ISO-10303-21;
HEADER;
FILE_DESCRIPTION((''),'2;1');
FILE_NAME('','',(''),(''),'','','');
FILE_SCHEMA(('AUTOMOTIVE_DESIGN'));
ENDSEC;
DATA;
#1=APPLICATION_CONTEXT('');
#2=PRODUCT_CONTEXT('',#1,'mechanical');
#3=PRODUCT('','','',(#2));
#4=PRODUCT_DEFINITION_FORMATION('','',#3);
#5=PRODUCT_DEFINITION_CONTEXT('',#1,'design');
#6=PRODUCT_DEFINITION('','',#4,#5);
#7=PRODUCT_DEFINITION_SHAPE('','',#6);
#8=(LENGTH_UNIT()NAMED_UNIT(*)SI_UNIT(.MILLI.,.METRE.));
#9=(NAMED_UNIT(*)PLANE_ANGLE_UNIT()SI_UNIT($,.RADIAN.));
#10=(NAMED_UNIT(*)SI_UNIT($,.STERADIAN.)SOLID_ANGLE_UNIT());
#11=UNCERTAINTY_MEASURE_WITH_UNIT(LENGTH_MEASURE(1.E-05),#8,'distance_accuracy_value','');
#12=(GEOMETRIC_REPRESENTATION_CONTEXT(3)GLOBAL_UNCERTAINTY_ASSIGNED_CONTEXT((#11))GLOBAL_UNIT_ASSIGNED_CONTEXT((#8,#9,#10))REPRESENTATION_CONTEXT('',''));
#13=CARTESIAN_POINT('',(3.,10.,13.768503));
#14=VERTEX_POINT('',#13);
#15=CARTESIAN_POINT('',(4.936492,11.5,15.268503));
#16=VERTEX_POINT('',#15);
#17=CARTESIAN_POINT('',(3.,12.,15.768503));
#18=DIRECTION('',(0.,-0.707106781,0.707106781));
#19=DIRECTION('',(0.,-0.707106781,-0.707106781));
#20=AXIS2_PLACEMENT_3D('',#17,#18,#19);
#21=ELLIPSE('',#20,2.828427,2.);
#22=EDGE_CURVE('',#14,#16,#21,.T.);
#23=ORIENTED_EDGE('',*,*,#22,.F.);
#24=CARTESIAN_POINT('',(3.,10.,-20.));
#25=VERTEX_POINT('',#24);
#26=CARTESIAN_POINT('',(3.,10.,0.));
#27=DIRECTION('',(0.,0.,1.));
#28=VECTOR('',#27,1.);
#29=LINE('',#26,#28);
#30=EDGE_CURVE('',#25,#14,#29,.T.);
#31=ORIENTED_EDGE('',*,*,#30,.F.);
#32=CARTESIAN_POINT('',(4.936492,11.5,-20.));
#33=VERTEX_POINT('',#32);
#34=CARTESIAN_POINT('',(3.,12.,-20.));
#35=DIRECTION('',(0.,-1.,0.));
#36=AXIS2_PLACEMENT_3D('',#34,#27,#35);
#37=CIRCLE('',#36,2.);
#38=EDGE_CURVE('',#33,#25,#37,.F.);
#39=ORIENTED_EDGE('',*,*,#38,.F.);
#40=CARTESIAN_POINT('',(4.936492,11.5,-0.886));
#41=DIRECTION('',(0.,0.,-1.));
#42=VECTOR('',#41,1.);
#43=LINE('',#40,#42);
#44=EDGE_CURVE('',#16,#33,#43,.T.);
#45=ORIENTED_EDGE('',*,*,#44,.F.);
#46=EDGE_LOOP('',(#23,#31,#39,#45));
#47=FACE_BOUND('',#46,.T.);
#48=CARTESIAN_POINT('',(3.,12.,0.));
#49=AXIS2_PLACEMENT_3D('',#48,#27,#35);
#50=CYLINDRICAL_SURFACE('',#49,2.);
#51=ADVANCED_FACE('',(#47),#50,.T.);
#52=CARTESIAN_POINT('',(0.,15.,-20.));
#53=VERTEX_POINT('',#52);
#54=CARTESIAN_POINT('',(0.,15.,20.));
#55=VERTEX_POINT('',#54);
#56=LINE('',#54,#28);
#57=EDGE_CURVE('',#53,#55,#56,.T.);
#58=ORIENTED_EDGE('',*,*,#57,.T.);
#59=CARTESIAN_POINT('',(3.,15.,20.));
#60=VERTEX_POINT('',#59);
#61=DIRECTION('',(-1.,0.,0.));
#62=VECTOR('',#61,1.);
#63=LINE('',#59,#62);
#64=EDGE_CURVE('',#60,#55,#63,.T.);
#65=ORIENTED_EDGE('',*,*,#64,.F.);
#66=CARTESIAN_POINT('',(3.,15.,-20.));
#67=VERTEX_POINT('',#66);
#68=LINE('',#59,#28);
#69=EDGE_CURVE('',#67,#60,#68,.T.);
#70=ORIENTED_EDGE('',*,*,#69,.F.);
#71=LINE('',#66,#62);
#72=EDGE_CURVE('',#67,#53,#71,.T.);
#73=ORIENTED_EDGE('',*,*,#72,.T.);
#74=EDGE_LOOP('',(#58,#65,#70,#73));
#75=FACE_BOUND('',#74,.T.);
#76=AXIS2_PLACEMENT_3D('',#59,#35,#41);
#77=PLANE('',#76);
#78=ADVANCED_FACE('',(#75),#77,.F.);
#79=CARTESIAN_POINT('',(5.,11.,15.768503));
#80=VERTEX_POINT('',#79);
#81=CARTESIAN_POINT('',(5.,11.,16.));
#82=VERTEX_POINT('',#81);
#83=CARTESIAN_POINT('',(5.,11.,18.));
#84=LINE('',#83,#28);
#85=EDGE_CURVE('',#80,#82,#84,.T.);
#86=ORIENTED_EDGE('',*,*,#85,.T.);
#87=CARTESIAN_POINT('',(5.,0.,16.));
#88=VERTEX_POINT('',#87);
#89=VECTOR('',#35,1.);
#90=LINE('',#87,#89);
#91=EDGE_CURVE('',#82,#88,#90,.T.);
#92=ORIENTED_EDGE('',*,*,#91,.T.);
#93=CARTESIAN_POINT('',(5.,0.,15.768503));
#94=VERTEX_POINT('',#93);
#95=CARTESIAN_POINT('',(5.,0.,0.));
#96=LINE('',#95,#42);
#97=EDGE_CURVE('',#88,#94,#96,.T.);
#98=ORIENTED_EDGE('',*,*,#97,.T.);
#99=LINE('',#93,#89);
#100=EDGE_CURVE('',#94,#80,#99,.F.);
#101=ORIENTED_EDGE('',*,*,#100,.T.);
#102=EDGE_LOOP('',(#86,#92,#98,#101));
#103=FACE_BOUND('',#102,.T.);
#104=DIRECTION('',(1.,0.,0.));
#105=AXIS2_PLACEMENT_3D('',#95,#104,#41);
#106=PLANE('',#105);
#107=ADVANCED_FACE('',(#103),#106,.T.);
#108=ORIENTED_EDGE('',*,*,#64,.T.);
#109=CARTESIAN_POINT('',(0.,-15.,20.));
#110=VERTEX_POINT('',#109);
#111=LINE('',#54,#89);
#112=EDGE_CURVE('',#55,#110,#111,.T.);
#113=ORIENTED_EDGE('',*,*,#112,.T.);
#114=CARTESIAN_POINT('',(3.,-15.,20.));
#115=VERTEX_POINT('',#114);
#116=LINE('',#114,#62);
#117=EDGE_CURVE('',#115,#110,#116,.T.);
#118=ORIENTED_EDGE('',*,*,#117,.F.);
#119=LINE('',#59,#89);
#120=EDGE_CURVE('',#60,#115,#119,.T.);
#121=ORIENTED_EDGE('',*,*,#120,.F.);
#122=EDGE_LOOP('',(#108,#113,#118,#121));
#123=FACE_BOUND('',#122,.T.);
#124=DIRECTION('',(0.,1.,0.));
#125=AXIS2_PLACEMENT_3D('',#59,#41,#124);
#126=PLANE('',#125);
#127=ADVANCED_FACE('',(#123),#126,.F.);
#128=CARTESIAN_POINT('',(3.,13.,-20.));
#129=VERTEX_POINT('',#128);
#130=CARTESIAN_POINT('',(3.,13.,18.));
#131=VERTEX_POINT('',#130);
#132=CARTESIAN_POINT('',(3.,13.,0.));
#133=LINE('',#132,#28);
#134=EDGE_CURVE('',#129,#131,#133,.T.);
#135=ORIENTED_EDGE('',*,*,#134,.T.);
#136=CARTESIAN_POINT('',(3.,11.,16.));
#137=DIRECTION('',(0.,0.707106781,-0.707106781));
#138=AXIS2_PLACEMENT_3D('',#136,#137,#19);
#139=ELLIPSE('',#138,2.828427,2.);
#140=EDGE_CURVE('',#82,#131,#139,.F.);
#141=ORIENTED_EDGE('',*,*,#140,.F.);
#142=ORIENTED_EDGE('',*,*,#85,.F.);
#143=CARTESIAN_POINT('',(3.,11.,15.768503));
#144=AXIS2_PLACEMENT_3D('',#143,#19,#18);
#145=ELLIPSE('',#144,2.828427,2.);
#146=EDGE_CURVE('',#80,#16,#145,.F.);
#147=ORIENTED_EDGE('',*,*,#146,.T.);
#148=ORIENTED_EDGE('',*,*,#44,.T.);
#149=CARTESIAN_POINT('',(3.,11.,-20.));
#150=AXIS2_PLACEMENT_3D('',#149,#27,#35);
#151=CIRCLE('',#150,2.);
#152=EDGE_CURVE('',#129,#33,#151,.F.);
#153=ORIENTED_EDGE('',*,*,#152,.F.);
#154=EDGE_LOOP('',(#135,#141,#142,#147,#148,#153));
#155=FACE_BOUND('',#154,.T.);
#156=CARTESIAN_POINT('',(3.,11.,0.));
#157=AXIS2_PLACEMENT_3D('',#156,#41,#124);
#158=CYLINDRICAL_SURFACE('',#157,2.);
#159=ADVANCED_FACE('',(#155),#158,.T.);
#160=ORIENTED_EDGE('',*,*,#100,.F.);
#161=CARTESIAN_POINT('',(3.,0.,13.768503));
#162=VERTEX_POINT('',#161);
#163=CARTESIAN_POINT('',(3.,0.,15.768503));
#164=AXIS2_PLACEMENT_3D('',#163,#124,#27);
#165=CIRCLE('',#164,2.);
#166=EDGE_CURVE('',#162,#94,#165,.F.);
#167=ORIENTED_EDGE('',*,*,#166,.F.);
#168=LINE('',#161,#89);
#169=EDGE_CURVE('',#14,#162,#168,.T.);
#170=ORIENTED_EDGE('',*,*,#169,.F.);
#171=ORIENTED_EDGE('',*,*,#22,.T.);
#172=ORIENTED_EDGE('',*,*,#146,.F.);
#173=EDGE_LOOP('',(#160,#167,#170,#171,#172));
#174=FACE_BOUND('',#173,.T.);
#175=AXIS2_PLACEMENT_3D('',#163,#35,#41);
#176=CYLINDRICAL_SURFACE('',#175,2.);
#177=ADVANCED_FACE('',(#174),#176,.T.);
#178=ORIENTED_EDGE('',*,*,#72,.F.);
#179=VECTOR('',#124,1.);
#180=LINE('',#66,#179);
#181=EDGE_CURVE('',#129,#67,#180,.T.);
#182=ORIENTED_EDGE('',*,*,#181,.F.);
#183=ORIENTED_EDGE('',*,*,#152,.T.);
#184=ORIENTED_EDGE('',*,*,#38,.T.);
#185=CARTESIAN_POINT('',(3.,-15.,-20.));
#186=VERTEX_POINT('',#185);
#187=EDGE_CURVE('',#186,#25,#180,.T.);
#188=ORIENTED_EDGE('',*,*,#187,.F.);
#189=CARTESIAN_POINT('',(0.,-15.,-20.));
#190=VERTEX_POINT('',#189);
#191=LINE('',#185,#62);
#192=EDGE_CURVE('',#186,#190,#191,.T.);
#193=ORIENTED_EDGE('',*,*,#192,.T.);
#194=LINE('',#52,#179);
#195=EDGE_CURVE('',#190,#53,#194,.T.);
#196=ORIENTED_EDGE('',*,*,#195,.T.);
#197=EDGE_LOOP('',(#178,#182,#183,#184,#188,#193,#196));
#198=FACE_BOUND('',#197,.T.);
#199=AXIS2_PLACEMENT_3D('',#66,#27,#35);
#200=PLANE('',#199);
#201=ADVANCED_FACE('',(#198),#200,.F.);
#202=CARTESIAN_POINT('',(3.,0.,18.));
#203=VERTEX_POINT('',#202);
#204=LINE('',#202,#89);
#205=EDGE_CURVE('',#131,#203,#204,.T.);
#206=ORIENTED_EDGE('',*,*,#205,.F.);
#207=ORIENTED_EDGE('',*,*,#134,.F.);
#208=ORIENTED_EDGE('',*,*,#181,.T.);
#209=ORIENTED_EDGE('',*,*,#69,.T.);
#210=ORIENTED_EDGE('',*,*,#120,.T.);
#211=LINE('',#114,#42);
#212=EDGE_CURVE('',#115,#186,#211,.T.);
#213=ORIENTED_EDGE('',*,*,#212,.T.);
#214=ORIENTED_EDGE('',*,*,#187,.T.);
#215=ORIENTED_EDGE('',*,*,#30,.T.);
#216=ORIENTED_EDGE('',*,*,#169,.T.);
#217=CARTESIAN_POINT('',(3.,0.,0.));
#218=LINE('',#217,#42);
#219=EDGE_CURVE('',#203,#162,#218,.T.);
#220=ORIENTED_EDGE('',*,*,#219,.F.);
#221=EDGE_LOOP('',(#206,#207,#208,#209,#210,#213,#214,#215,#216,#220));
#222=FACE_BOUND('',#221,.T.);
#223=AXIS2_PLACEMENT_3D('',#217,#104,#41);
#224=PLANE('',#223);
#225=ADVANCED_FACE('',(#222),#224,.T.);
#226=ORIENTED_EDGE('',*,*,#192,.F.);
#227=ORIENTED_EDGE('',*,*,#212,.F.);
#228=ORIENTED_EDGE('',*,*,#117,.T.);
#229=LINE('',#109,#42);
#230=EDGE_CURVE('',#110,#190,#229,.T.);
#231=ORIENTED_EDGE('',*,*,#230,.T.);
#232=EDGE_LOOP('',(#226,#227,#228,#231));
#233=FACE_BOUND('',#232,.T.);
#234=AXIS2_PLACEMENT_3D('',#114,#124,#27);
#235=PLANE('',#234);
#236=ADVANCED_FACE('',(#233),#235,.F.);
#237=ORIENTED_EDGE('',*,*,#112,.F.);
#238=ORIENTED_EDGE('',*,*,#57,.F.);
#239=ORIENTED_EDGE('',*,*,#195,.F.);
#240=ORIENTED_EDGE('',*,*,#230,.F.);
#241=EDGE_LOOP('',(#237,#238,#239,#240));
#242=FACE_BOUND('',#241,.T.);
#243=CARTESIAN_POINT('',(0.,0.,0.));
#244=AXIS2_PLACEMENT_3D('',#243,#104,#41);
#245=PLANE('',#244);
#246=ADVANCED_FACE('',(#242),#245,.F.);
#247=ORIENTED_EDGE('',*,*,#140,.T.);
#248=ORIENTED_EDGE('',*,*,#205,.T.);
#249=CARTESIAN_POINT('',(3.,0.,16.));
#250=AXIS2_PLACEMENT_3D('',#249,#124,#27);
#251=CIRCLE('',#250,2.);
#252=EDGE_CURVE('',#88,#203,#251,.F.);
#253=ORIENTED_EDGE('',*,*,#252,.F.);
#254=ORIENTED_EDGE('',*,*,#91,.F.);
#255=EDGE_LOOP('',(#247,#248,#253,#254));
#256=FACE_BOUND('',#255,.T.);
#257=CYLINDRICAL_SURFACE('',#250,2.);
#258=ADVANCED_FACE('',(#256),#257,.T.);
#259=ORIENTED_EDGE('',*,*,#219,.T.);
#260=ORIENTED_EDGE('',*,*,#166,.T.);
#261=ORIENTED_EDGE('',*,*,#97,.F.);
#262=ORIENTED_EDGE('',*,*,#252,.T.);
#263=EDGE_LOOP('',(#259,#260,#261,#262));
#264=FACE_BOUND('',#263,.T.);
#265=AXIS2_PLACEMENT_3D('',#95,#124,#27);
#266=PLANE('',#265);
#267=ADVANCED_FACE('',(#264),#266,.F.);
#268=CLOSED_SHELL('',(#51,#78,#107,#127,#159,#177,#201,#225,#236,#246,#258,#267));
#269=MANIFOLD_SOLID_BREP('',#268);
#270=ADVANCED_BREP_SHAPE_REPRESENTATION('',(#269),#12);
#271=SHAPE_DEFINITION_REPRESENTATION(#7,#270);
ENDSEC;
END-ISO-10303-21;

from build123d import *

# Parameters (mm, degrees)
SKETCH1_W           = 40
SKETCH1_H           = 30
BOSS_EXTRUDE1_DEPTH = 3
BOSS_EXTRUDE2_DEPTH = 2
FILLET1_R           = 2


with BuildPart() as part:
    # Sketch1 → Boss-Extrude1 (new body)
    with BuildSketch(Plane(origin=(0, 0, 0), x_dir=(0, 0, -1), z_dir=(1, 0, 0))):
        Rectangle(SKETCH1_W, SKETCH1_H)
    extrude(amount=BOSS_EXTRUDE1_DEPTH)

    # Sketch2 → Boss-Extrude2 (add)
    with BuildSketch(Plane(origin=(3, 0, 0), x_dir=(0, 0, -1), z_dir=(1, 0, 0))):
        Polygon((20, 10), (20, 13), (-13.768503326, 13), (-18, 13), (-18, 10), (-18, 0), (-13.768503326, 0), (-13.768503326, 10), align=None)
    extrude(amount=BOSS_EXTRUDE2_DEPTH)

    # Fillet1
    # the kernel refuses this fillet: 2 mm, written as the material it takes off along each edge
    with BuildSketch(Plane(origin=(5, -5, 18), x_dir=(-1, 0, 0), z_dir=(0, 1, 0))) as fillet1_piece_1:
        with BuildLine():
            CenterArc((FILLET1_R, -FILLET1_R), FILLET1_R, 90, 90)
            Line((0, -FILLET1_R), (0, 0))
            Line((0, 0), (FILLET1_R, 0))
        make_face()
    extrude(amount=23, mode=Mode.SUBTRACT)
    with BuildSketch(Plane(origin=(5, -5, 13.768503326), x_dir=(-1, 0, 0), z_dir=(0, 1, 0))) as fillet1_piece_2:
        with BuildLine():
            CenterArc((FILLET1_R, FILLET1_R), FILLET1_R, 180, 90)
            Line((0, FILLET1_R), (0, 0))
            Line((0, 0), (FILLET1_R, 0))
        make_face()
    extrude(amount=15, mode=Mode.SUBTRACT)
    with BuildSketch(Plane(origin=(5, 10, 13.768503326), x_dir=(-1, 0, 0), z_dir=(0, 0, -1))) as fillet1_piece_3:
        with BuildLine():
            CenterArc((FILLET1_R, FILLET1_R), FILLET1_R, 180, 90)
            Line((0, FILLET1_R), (0, 0))
            Line((0, 0), (FILLET1_R, 0))
        make_face()
    extrude(amount=38.768503326, mode=Mode.SUBTRACT)
    with BuildSketch(Plane(origin=(5, 13, 23), x_dir=(-1, 0, 0), z_dir=(0, 0, -1))) as fillet1_piece_4:
        with BuildLine():
            CenterArc((FILLET1_R, -FILLET1_R), FILLET1_R, 90, 90)
            Line((0, -FILLET1_R), (0, 0))
            Line((0, 0), (FILLET1_R, 0))
        make_face()
    extrude(amount=48, mode=Mode.SUBTRACT)
    with BuildSketch(Plane(origin=(5, 10, 18.768503326), x_dir=(-1, 0, 0), z_dir=(0, 0, -1))) as fillet1_piece_5a_section:
        with BuildLine():
            CenterArc((FILLET1_R, FILLET1_R), FILLET1_R, 180, 90)
            Line((0, FILLET1_R), (0, 0))
            Line((0, 0), (FILLET1_R, 0))
        make_face()
    fillet1_piece_5a = extrude(amount=43.768503326, mode=Mode.PRIVATE)
    fillet1_piece_5a = split(fillet1_piece_5a, bisect_by=Plane(origin=(4.547209771, 10.452790229, 13.768503326), z_dir=(0, 0, 1)), keep=Keep.TOP, mode=Mode.PRIVATE)
    with BuildSketch(Plane(origin=(5, -5, 13.768503326), x_dir=(-1, 0, 0), z_dir=(0, 1, 0))) as fillet1_piece_5b_section:
        with BuildLine():
            CenterArc((FILLET1_R, FILLET1_R), FILLET1_R, 180, 90)
            Line((0, FILLET1_R), (0, 0))
            Line((0, 0), (FILLET1_R, 0))
        make_face()
    fillet1_piece_5b = extrude(amount=20, mode=Mode.PRIVATE)
    fillet1_piece_5b = split(fillet1_piece_5b, bisect_by=Plane(origin=(4.547209771, 10, 14.221293555), z_dir=(0, 1, 0)), keep=Keep.TOP, mode=Mode.PRIVATE)
    fillet1_piece_5 = fillet1_piece_5a & fillet1_piece_5b
    add(fillet1_piece_5, mode=Mode.SUBTRACT)


solid = part.part
